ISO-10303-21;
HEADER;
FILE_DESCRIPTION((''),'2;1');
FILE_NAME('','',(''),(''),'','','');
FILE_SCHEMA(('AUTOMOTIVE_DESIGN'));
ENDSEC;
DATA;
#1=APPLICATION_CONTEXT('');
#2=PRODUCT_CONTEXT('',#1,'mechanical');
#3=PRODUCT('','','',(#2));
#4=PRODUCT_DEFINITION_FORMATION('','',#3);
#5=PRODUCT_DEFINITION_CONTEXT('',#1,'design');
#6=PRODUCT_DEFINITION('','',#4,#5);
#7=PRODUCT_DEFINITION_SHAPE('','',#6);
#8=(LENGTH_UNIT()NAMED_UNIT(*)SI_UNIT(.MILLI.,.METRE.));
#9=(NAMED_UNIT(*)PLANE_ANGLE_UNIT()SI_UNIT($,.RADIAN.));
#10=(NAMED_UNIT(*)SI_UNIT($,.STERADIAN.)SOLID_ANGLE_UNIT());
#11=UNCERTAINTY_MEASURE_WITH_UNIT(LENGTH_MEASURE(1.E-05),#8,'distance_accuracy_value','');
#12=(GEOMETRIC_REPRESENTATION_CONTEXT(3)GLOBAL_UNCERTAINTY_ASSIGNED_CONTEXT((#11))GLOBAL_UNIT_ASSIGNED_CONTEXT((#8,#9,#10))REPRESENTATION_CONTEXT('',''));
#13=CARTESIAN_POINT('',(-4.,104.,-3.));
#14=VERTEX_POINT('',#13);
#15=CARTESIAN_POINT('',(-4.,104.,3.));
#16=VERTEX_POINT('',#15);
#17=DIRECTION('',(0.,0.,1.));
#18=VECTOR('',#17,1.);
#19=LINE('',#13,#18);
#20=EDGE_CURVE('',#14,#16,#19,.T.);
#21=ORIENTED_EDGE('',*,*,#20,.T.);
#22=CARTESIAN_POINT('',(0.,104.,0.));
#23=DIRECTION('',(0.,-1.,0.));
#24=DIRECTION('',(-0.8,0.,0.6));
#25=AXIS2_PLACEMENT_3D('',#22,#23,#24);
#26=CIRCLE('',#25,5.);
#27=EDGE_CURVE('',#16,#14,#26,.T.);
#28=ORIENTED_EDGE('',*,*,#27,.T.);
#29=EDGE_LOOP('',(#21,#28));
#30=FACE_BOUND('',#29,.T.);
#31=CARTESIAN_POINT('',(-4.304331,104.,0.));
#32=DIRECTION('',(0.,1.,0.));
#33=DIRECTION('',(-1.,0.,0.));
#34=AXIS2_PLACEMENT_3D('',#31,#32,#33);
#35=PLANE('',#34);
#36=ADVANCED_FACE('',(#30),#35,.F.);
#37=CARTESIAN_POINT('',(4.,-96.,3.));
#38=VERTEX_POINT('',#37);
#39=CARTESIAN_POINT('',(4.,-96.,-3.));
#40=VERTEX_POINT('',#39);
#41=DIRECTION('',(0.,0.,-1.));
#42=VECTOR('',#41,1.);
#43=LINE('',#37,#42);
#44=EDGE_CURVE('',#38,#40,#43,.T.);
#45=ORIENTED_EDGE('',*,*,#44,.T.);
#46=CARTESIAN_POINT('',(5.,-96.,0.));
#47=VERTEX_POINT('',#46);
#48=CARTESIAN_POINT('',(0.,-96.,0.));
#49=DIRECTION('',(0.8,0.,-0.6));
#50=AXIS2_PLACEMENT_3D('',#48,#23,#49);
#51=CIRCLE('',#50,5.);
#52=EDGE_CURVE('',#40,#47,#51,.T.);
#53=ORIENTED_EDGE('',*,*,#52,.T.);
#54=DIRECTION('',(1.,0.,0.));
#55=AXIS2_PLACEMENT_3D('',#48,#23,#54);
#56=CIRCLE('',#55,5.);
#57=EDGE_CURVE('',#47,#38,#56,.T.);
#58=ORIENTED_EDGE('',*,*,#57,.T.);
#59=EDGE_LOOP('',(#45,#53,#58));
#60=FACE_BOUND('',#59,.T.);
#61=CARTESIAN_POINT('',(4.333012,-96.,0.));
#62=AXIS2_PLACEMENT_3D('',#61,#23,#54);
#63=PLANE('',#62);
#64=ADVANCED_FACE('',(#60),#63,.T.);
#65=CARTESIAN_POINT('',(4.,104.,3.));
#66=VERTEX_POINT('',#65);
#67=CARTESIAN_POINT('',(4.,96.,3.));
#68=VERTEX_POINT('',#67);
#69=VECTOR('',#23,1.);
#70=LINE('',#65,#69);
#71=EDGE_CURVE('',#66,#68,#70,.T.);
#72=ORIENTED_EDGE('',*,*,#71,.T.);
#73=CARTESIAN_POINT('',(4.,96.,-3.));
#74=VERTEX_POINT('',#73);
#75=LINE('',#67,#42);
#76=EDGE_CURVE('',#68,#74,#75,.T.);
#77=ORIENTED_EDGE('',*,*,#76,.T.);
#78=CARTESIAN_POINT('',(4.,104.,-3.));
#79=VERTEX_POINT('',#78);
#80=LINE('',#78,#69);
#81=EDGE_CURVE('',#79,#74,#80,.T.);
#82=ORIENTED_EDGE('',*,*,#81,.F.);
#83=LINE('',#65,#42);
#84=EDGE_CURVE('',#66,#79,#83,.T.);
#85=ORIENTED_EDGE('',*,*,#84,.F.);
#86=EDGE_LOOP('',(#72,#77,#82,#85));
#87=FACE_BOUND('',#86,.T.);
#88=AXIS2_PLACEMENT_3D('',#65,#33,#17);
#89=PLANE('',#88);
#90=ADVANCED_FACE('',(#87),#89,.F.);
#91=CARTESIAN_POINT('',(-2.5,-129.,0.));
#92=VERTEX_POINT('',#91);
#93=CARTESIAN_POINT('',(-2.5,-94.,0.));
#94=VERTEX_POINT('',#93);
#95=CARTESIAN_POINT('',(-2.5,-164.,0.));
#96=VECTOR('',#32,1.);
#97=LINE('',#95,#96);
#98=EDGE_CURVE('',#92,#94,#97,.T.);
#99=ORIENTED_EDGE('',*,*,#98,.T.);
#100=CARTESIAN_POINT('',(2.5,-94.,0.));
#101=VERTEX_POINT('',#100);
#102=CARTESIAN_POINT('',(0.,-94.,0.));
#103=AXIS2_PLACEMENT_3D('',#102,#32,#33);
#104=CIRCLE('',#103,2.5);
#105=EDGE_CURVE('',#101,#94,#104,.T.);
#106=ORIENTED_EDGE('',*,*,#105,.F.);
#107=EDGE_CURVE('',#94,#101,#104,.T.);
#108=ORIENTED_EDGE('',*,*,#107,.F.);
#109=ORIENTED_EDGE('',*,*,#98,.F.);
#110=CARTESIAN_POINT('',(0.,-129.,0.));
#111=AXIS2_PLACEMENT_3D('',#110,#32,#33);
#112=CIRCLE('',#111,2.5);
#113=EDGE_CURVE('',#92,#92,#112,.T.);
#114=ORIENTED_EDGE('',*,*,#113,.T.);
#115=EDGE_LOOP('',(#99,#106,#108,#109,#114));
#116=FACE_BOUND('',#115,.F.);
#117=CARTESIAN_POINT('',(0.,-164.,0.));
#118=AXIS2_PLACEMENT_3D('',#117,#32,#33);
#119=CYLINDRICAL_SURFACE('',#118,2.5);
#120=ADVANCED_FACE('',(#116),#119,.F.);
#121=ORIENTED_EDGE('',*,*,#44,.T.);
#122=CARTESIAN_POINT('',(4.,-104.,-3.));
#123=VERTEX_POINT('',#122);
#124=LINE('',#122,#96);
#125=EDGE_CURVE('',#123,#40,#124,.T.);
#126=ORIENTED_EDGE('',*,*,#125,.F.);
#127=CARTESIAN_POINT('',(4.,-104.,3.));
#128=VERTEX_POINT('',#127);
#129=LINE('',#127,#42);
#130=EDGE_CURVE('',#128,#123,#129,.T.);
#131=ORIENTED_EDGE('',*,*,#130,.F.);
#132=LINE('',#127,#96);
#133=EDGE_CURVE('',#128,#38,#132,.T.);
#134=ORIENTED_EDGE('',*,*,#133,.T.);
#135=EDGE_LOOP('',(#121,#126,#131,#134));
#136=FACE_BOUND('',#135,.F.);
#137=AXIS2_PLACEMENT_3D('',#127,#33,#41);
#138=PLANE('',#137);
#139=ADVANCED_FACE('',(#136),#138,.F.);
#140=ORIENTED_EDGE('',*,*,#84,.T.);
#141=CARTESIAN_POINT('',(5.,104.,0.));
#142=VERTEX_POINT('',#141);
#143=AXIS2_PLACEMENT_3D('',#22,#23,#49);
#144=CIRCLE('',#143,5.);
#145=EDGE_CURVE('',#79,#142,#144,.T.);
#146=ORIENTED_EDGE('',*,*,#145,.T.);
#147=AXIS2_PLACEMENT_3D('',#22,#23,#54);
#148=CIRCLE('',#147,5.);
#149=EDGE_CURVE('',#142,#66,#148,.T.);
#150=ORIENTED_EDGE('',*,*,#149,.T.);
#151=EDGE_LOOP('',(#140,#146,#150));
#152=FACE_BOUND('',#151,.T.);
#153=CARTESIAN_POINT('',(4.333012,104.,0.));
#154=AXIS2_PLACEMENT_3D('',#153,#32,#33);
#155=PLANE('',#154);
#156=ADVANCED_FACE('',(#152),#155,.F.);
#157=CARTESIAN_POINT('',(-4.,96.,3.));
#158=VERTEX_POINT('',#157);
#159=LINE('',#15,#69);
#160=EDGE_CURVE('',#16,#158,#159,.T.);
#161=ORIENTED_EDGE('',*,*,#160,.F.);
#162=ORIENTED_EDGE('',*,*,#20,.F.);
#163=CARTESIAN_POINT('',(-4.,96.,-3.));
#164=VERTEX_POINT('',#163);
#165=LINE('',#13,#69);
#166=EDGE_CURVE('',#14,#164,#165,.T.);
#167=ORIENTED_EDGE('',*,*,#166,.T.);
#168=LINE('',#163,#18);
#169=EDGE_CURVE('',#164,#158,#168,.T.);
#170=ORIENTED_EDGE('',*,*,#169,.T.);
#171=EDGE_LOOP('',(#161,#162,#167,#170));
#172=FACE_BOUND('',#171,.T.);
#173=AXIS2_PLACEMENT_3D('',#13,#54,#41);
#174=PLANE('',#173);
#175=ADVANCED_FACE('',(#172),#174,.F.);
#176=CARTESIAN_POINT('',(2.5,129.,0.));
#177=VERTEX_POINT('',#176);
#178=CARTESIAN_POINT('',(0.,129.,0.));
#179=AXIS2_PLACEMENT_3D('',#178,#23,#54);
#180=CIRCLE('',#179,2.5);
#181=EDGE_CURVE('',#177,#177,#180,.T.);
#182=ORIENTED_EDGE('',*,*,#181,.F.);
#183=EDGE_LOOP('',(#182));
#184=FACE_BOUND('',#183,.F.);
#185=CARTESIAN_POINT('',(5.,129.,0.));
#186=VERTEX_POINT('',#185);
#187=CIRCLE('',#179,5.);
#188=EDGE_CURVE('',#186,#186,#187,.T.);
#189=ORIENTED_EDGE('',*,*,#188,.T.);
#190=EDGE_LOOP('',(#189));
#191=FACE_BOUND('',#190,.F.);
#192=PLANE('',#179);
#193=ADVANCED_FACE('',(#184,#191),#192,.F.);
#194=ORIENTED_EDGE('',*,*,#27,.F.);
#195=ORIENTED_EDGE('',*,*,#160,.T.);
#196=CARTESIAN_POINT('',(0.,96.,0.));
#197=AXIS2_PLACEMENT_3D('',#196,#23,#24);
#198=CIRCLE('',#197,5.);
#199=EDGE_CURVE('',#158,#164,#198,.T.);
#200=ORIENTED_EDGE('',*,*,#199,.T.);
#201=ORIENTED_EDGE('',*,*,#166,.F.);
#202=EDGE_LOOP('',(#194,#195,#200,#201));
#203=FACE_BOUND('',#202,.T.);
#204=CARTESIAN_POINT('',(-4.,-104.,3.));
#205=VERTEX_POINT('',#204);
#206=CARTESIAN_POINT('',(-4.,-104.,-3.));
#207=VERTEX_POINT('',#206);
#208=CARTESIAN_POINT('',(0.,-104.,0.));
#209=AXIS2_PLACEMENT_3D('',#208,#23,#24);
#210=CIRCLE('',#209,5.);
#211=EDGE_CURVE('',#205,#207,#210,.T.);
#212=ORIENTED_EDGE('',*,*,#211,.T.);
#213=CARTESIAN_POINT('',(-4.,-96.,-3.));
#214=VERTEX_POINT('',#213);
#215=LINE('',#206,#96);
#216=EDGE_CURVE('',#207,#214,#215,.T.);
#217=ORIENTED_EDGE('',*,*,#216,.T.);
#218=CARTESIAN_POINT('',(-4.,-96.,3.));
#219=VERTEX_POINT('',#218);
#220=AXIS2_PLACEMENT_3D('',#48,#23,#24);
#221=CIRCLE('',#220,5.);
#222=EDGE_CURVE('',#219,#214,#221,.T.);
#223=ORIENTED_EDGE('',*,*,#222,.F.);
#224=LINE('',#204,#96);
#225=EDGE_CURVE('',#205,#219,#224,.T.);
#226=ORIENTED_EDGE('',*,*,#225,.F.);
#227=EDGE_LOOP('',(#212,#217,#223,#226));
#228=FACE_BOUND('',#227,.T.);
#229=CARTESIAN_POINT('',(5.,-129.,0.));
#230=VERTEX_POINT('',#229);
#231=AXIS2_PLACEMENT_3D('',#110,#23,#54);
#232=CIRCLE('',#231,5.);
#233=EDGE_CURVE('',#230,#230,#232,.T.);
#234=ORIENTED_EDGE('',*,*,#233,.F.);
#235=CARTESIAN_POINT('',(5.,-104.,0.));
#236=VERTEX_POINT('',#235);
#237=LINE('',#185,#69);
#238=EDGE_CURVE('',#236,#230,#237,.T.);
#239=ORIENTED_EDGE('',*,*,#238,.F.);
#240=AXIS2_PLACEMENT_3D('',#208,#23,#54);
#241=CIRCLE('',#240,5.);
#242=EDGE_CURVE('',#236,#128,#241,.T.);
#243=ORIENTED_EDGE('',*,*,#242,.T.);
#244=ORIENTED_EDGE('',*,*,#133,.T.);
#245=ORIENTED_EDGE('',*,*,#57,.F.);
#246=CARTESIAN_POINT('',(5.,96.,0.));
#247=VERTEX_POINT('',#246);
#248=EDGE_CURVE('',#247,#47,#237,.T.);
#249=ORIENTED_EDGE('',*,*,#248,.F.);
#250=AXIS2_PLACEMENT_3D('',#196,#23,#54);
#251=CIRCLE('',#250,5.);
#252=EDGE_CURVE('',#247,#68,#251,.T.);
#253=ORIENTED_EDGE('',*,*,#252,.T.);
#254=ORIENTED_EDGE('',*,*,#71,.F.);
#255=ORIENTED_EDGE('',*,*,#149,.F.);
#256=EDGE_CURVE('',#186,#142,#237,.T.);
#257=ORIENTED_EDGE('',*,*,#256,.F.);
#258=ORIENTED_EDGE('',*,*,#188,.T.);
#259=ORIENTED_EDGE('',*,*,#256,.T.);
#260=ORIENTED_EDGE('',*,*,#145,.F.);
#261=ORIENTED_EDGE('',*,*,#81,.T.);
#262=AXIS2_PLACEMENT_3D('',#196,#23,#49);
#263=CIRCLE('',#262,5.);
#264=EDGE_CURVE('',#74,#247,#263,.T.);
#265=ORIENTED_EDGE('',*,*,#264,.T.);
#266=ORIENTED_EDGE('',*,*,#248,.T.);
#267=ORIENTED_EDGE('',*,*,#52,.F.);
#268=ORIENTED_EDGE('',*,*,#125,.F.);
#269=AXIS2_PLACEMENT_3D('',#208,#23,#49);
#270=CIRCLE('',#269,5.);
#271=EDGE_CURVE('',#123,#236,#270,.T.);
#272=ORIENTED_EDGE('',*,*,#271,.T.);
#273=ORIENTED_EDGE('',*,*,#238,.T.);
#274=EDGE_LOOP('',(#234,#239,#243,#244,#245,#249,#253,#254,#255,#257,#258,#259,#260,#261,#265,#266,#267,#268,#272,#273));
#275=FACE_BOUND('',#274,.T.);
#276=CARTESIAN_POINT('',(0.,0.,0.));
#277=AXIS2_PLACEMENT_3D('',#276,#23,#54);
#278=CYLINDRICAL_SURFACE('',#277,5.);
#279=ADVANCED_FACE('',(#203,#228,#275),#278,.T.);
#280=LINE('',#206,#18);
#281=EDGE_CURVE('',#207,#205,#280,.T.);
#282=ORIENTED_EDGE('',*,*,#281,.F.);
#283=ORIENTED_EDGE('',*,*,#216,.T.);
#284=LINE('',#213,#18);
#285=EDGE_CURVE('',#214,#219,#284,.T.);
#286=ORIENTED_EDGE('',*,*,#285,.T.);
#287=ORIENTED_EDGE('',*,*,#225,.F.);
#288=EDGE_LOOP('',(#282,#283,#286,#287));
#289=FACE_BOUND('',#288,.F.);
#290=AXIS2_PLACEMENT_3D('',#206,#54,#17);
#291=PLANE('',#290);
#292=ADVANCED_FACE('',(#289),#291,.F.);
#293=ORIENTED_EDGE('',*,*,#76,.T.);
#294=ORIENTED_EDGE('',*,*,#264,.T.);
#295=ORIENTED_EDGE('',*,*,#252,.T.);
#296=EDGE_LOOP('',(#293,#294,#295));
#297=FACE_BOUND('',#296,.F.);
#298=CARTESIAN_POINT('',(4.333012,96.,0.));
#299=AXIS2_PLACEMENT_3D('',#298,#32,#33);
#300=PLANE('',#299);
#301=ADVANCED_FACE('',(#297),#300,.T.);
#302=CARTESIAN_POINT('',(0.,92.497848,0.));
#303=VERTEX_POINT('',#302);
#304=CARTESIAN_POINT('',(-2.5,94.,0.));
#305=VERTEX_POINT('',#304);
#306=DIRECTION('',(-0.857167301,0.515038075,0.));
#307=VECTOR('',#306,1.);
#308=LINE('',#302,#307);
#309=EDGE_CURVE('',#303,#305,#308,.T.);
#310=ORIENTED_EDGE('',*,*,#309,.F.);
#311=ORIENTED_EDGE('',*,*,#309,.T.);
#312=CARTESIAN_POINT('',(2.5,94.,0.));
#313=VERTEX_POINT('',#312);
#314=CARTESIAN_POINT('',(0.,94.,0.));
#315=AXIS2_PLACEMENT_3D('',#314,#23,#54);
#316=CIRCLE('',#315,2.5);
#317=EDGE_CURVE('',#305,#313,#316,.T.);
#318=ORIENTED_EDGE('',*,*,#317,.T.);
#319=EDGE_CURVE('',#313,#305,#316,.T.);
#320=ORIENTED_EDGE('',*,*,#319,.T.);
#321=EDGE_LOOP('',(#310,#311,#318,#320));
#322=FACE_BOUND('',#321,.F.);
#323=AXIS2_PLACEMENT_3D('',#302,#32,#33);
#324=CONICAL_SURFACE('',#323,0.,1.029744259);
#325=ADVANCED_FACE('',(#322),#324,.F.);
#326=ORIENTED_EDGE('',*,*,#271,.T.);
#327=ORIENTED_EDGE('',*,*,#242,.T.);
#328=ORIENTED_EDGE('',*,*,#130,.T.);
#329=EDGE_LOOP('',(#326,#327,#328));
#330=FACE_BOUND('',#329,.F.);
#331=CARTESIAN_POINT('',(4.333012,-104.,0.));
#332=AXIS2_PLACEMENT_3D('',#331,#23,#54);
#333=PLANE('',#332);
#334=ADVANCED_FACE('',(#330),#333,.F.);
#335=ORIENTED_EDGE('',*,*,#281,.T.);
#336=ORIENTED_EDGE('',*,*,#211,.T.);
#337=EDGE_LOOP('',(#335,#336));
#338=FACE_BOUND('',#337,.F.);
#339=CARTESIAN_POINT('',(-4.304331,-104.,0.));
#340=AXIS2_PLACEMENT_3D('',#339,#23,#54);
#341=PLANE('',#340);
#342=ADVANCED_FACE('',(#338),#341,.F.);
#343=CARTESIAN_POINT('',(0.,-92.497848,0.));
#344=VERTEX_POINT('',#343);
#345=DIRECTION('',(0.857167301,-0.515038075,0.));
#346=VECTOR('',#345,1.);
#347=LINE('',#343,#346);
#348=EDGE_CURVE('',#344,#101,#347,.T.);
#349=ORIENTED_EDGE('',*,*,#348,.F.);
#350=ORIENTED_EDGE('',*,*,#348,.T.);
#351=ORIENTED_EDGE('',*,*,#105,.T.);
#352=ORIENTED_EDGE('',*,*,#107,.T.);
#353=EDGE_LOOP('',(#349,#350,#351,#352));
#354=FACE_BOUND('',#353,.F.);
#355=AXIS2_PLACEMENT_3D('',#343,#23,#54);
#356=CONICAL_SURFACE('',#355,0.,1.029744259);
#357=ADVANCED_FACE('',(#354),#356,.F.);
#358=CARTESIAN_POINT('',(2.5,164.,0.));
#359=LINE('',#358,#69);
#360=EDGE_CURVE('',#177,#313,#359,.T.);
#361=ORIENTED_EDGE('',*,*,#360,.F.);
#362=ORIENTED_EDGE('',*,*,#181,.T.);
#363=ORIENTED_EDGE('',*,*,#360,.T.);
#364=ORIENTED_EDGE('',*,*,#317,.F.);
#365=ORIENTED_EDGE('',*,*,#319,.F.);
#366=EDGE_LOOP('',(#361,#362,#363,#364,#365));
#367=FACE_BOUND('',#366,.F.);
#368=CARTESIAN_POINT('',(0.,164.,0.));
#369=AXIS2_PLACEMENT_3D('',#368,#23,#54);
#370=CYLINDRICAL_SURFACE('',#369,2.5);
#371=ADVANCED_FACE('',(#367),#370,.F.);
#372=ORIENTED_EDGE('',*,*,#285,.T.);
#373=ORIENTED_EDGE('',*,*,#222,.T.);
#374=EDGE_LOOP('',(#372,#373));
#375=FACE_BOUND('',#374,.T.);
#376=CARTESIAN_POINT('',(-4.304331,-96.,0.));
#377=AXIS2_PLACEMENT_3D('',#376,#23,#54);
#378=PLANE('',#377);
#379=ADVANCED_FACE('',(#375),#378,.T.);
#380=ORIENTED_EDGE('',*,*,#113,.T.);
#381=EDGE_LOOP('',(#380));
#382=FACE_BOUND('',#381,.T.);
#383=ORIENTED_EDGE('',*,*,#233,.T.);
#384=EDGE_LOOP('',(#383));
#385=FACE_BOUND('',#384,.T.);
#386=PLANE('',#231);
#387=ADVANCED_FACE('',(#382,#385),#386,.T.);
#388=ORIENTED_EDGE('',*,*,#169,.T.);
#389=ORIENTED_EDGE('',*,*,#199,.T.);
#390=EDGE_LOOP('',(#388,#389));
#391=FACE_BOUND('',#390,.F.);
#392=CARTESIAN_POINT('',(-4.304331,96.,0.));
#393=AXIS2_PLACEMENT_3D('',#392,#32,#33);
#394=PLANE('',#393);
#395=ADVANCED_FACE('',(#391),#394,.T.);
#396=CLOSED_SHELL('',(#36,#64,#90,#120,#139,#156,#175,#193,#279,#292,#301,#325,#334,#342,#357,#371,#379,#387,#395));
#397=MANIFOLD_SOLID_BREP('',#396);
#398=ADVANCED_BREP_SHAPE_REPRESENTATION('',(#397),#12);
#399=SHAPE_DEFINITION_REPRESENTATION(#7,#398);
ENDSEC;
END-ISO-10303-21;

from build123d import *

# Parameters (mm, degrees)
F0_R     = 5
F1_DEPTH = 129
F3_D     = 5
F3_DEPTH = 35
F3_TIP   = 1.5021515476
F5_D     = 5
F5_DEPTH = 35
F5_TIP   = 1.5021515476
F8_DEPTH = 8


# Not quite as in the source:
# - a pattern or mirror of a feature is missing from the dataset's text; its kind, count and spacing are read off the source's solid


with BuildPart() as f1:
    # F0 (on Front) → F1 (new body, symmetric)
    with BuildSketch(Plane.XZ):
        Circle(F0_R)
    extrude(amount=F1_DEPTH, both=True)

    # F3
    with Locations(Plane.XZ.offset(129)):
        with Locations((0, 0)):
            Hole(F3_D / 2, depth=F3_DEPTH)
            with Locations((0, 0, -(F3_DEPTH + F3_TIP / 2))):  # 118° drill point
                Cone(0, F3_D / 2, F3_TIP, mode=Mode.SUBTRACT)

    # F5
    with Locations(Plane(origin=(0, 129, 0), x_dir=(-1, 0, 0), z_dir=(0, 1, 0))):
        with Locations((0, 0)):
            Hole(F5_D / 2, depth=F5_DEPTH)
            with Locations((0, 0, -(F5_DEPTH + F5_TIP / 2))):  # 118° drill point
                Cone(0, F5_D / 2, F5_TIP, mode=Mode.SUBTRACT)

    # F7 (on offset) → F8 (cut)
    with BuildSketch(Plane.XZ.offset(104)):
        with BuildLine():
            Line((-4, -3), (-4, 3))
            ThreePointArc((-4, 3), (-5, 0), (-4, -3))
        make_face()
        with BuildLine():
            ThreePointArc((5, 0), (4.7434164903, 1.5811388301), (4, 3))
            Line((4, 3), (4, -3))
            ThreePointArc((4, -3), (4.7434164903, -1.5811388301), (5, 0))
        make_face()
    f8 = extrude(amount=-F8_DEPTH, mode=Mode.SUBTRACT)

    # F8_copies: F8 across plane
    add(f8.mirror(Plane.ZX), mode=Mode.SUBTRACT)


solid = f1.part
